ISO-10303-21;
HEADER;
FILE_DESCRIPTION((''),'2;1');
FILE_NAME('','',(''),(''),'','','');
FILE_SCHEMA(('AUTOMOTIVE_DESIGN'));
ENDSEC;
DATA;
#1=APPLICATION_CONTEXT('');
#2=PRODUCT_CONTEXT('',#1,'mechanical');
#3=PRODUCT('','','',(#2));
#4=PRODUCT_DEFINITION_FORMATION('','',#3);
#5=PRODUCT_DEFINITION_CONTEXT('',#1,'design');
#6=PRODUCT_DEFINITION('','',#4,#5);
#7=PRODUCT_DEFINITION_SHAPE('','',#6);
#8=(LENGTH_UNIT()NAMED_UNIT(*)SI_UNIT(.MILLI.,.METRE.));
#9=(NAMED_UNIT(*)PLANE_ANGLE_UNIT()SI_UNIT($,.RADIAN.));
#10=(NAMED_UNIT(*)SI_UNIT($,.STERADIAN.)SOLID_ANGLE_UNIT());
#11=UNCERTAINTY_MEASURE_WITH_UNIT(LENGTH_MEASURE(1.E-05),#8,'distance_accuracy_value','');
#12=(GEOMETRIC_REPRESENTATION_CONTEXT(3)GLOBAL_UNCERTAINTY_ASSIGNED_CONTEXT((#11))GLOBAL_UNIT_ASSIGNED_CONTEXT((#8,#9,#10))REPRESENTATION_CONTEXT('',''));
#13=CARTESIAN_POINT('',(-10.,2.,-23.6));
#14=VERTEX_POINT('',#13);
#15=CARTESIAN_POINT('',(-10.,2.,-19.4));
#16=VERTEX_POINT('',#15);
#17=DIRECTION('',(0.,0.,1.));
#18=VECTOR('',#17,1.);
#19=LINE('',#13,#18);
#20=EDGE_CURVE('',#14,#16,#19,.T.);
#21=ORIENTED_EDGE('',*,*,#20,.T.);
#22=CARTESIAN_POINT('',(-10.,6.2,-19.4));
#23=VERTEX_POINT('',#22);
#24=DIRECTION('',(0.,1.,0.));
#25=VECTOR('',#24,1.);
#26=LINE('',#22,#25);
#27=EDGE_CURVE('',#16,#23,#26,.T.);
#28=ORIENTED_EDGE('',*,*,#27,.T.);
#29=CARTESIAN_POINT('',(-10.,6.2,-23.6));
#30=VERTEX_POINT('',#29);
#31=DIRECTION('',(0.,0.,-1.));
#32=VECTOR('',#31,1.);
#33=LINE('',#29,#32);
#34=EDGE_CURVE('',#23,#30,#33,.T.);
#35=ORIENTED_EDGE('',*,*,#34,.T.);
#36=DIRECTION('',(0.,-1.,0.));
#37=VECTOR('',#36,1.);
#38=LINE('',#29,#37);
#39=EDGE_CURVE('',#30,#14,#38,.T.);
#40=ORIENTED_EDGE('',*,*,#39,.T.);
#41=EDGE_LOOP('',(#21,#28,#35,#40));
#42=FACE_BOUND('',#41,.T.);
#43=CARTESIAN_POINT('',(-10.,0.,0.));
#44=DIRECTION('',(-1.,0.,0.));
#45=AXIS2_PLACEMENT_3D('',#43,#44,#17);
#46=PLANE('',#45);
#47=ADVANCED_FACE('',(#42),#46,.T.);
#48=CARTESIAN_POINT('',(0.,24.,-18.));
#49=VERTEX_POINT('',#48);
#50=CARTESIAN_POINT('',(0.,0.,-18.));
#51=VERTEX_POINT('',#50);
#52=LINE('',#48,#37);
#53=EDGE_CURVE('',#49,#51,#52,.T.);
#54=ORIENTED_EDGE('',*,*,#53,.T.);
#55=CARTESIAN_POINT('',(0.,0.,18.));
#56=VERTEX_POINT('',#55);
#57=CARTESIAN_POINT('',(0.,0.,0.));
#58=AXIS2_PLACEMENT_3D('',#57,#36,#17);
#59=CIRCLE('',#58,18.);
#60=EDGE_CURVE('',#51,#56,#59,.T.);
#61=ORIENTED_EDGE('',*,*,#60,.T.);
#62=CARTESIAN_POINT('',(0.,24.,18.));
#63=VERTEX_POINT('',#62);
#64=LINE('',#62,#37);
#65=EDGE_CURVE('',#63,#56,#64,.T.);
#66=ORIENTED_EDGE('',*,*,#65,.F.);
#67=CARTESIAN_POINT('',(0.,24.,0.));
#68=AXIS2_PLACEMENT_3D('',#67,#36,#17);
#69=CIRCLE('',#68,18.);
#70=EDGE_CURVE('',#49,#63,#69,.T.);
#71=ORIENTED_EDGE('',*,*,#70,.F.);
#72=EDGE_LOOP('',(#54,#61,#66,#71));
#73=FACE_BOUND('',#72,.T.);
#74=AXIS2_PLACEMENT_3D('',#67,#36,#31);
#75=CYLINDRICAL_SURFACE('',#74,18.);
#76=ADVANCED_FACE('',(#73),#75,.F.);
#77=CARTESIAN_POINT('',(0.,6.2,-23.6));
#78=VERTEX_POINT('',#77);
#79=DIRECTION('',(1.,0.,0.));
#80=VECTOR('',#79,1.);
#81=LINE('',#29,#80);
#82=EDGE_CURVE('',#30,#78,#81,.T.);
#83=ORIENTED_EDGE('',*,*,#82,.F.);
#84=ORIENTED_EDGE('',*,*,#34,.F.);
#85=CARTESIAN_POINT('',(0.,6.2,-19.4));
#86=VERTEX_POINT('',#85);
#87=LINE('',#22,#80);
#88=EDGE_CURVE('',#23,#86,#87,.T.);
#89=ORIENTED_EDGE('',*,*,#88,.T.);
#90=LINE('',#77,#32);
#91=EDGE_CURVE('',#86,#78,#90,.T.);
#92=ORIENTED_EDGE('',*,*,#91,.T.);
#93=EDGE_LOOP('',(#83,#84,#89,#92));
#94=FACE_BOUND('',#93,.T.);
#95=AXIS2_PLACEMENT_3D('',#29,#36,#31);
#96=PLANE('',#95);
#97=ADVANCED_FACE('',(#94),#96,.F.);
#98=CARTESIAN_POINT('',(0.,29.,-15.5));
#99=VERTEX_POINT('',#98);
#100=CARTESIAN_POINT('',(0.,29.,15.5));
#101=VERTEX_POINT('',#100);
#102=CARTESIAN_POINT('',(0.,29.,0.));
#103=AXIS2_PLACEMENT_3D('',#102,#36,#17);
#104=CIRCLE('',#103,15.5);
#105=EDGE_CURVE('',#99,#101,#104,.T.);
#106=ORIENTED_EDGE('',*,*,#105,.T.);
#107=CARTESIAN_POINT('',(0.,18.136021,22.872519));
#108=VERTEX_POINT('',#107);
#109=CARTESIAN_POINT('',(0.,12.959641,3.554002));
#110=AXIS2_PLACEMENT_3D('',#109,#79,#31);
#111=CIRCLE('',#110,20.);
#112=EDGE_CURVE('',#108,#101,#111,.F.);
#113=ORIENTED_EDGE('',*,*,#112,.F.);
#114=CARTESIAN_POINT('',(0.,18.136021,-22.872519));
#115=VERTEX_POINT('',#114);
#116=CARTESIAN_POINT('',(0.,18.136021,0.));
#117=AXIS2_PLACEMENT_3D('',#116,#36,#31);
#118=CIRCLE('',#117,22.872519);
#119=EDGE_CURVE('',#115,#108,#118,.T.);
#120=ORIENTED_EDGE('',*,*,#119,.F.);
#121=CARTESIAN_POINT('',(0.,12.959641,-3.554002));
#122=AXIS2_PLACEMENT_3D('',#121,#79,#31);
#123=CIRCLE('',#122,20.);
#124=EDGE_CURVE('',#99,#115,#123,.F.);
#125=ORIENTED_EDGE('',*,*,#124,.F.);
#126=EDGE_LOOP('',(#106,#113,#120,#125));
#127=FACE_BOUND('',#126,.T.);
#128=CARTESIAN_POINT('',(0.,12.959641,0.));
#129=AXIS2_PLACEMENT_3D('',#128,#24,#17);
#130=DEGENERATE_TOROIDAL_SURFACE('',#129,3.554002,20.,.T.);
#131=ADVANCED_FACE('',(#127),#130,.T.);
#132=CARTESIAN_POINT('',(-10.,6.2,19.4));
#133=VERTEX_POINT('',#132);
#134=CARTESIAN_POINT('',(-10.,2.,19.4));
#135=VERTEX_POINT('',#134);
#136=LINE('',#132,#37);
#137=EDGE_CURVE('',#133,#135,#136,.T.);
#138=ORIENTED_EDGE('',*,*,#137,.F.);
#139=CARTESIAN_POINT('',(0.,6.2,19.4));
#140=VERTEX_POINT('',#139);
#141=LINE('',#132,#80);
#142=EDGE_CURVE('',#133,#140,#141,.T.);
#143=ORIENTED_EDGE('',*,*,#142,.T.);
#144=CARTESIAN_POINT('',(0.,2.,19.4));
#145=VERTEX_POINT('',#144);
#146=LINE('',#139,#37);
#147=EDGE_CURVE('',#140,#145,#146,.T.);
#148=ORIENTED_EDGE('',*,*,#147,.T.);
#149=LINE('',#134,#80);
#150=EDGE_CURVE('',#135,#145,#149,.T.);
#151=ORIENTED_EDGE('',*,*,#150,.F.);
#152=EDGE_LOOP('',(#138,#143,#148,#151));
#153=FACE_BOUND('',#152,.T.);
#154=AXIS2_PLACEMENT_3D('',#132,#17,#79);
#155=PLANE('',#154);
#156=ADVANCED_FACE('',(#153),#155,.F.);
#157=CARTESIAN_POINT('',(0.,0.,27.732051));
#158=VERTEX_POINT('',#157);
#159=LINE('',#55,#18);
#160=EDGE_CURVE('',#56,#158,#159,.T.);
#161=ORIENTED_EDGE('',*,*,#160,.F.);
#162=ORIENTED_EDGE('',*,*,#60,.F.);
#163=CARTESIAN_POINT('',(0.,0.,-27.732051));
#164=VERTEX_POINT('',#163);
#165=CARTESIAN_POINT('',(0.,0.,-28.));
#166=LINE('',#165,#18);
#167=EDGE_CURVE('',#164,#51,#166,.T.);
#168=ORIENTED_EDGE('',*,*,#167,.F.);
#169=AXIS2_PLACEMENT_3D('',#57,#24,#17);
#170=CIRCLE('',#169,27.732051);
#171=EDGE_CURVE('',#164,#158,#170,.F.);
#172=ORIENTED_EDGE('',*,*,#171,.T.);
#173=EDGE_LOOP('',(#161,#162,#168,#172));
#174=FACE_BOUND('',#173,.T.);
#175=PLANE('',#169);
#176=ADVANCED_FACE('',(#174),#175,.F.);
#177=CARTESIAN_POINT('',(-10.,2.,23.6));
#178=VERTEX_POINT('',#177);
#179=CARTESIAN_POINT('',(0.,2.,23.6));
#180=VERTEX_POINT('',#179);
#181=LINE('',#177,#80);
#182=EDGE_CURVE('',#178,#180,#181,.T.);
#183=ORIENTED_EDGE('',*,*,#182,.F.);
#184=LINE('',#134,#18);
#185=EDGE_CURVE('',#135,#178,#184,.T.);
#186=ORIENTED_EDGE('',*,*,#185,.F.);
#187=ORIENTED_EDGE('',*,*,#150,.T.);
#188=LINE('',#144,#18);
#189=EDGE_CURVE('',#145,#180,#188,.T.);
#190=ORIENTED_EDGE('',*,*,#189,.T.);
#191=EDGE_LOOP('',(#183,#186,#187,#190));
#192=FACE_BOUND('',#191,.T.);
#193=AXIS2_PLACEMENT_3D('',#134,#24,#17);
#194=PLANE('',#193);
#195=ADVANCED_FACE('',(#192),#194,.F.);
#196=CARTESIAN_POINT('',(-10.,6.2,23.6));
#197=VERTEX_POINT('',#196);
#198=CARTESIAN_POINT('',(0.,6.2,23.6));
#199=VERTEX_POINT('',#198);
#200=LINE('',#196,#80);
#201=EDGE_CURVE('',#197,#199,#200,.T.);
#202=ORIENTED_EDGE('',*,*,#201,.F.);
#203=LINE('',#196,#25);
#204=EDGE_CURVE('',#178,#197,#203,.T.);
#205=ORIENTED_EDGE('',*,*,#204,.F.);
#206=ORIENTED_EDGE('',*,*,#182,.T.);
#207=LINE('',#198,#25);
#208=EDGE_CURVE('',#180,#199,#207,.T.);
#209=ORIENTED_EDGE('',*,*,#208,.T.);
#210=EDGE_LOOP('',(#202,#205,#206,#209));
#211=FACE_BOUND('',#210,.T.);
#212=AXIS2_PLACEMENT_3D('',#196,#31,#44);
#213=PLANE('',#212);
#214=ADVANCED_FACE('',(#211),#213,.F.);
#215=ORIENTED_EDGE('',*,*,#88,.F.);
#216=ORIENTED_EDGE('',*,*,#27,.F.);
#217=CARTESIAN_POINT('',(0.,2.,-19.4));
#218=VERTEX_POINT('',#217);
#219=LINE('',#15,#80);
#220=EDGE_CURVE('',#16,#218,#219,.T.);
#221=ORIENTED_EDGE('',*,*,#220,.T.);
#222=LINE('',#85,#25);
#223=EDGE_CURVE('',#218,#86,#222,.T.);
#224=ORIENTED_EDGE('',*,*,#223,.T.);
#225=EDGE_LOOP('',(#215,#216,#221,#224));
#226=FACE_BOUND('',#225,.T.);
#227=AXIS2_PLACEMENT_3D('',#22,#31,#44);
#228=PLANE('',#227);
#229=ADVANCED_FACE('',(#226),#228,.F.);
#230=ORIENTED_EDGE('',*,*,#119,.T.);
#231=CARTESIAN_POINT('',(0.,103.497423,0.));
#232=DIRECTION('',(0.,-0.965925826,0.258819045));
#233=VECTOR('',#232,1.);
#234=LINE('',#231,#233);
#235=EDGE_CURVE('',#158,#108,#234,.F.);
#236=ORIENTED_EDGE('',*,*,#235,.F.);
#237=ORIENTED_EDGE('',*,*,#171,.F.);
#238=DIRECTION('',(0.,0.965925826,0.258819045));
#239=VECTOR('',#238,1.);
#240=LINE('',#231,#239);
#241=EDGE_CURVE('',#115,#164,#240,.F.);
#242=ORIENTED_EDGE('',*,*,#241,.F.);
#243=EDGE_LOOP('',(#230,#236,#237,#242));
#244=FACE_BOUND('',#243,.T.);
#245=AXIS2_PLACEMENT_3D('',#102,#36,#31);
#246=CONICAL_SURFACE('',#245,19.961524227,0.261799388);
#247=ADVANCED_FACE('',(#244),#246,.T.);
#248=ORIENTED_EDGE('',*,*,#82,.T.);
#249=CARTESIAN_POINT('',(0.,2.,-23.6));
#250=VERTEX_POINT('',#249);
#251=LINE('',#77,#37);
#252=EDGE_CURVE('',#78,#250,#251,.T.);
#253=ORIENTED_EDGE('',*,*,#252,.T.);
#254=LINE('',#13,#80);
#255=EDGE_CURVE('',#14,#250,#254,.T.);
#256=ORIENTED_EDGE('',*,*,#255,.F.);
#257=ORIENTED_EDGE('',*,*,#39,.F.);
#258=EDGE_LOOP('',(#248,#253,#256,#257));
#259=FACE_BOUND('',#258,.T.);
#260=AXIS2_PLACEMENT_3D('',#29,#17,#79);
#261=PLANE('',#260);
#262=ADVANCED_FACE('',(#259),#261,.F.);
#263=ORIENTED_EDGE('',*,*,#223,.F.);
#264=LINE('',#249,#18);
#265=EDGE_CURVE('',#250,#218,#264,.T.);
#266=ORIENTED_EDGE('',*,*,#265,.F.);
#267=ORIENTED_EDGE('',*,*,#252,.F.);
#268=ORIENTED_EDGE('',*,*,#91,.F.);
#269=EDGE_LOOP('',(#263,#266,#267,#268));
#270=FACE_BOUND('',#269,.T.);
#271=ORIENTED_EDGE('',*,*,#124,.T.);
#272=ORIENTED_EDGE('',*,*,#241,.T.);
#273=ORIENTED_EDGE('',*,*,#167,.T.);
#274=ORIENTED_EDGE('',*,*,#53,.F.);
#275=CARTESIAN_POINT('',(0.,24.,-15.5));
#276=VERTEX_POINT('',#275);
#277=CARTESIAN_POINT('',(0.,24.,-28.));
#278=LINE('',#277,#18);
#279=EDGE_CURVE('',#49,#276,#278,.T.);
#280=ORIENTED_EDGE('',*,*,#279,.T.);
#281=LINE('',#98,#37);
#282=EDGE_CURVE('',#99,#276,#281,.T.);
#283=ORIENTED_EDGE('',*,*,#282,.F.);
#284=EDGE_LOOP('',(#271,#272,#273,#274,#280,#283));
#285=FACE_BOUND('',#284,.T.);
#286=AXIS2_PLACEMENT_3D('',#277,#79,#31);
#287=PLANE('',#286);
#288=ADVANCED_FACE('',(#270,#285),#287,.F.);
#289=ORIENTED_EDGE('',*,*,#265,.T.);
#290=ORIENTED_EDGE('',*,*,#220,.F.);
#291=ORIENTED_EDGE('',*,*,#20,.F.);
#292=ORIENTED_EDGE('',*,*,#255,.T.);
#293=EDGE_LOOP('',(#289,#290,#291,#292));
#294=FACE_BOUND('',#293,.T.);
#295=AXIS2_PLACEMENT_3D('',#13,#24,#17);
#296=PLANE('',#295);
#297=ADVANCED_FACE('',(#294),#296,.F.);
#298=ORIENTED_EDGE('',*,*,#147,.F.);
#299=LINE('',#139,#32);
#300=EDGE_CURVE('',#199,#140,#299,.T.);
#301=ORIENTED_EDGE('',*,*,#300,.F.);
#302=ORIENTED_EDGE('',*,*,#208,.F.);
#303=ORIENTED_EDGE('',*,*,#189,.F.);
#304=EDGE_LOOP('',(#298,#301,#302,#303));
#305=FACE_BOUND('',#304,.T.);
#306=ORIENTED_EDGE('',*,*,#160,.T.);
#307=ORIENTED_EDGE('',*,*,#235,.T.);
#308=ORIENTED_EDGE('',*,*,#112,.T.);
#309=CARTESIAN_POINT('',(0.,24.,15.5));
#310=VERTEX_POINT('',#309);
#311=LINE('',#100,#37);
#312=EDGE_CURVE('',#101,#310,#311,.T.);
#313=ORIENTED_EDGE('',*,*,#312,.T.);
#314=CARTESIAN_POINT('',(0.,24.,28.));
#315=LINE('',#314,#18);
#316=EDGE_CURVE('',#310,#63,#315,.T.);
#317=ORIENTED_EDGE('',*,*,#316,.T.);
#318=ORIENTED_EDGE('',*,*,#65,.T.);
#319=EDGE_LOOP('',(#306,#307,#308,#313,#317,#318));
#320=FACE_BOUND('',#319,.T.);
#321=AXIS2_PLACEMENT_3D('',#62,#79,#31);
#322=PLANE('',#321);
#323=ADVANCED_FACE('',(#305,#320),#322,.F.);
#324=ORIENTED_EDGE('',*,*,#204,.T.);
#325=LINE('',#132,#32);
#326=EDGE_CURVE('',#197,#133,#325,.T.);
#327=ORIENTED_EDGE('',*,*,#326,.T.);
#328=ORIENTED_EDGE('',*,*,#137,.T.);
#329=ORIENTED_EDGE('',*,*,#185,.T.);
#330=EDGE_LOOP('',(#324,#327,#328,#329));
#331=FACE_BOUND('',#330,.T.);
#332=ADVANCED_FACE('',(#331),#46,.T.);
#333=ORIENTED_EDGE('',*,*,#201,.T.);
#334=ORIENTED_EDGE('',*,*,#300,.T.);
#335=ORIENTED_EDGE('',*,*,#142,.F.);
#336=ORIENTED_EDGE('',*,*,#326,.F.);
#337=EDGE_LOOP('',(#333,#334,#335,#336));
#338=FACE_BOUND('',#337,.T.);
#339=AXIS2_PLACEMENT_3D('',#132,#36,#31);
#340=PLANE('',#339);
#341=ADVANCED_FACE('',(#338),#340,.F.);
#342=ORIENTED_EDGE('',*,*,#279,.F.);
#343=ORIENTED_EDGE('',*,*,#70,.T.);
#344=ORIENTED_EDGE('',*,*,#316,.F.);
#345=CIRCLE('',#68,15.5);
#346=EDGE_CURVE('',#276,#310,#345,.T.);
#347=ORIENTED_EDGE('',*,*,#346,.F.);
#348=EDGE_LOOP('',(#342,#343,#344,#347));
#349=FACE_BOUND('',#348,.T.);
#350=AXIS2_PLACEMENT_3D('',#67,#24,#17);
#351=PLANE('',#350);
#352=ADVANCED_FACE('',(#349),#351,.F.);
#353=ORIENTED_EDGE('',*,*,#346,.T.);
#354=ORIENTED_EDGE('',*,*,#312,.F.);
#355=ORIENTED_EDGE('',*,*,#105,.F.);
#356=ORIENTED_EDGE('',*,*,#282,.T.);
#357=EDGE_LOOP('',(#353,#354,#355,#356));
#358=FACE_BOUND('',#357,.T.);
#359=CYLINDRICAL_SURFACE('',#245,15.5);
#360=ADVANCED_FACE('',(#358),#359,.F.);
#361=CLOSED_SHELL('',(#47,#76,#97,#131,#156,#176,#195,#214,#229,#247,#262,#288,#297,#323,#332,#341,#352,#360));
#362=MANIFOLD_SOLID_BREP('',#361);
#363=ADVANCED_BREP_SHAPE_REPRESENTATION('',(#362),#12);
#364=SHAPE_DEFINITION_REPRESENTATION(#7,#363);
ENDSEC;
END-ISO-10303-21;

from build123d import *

# Parameters (mm, degrees)
BOSS_EXTRUDE1_DEPTH = 24
BOSS_EXTRUDE2_DEPTH = 5
CHAMFER1_SIZE       = 8.038475773
CHAMFER1_SIZE_2     = 30
FILLET1_R           = 20
SKETCH3_W           = 4.2
SKETCH3_H           = 4.2
BOSS_EXTRUDE3_DEPTH = 10


with BuildPart() as part:
    # Sketch1 → Boss-Extrude1 (new body)
    with BuildSketch(Plane(origin=(0, 0, 0), x_dir=(1, 0, 0), z_dir=(0, 1, 0))):
        with BuildLine():
            Line((0, 28), (0, 18))
            ThreePointArc((0, 18), (18, 0), (0, -18))
            Line((0, -18), (0, -28))
            ThreePointArc((0, -28), (28, 0), (0, 28))
        make_face()
    extrude(amount=BOSS_EXTRUDE1_DEPTH)

    # Sketch2 → Boss-Extrude2 (add)
    with BuildSketch(Plane(origin=(0, 24, 0), x_dir=(1, 0, 0), z_dir=(0, 1, 0))):
        with BuildLine():
            Line((0, 28), (0, 15.5))
            ThreePointArc((0, 15.5), (15.5, 0), (0, -15.5))
            Line((0, -15.5), (0, -28))
            ThreePointArc((0, -28), (28, 0), (0, 28))
        make_face()
    extrude(amount=BOSS_EXTRUDE2_DEPTH)

    # Chamfer1
    # the kernel refuses this chamfer: 30, 8.038475773 mm, written as the material it takes off along each edge
    with BuildSketch(Plane(origin=(0, 29, 0), x_dir=(-0.9999950652018581, 0, 0.0031415874858793337), z_dir=(-0.0031415874858793337, 0, -0.9999950652018581))) as chamfer1_piece_1:
        Polygon((28 - CHAMFER1_SIZE, 0), (28, -CHAMFER1_SIZE_2), (28, 0), align=None)
    revolve(axis=Axis((0, 29, 0), (0, 1, 0)), revolution_arc=359.64, mode=Mode.SUBTRACT)

    # Fillet1
    # the kernel refuses this fillet: 20 mm, written as the material it takes off along each edge
    with BuildSketch(Plane(origin=(0, 29, 0), x_dir=(-0.9872402067146837, 0, 0.1592381055085398), z_dir=(-0.1592381055085398, 0, -0.9872402067146837))) as fillet1_piece_1:
        with BuildLine():
            CenterArc((3.55400198, -16.040359451), FILLET1_R, 15, 38.323238927)
            Line((15.5, 0), (15.73891996, 0.320807189))
            ThreePointArc((15.73891996, 0.320807189), (17.730762114, 0.4), (19.961524227, 0.4))
            Line((19.961524227, 0.4), (20.347894558, 0.103527618))
            Line((20.347894558, 0.103527618), (23.258888836, -10.76045093))
            Line((23.258888836, -10.76045093), (22.872518506, -10.863978548))
        make_face()
    revolve(axis=Axis((0, 29, 0), (0, 1, 0)), revolution_arc=341.674648162, mode=Mode.SUBTRACT)

    # Sketch3 → Boss-Extrude3 (add)
    with BuildSketch(Plane.ZY):
        with Locations((21.5, 4.1)):
            Rectangle(SKETCH3_W, SKETCH3_H)
        with Locations((-21.5, 4.1)):
            Rectangle(SKETCH3_W, SKETCH3_H)
    extrude(amount=BOSS_EXTRUDE3_DEPTH)


solid = part.part
